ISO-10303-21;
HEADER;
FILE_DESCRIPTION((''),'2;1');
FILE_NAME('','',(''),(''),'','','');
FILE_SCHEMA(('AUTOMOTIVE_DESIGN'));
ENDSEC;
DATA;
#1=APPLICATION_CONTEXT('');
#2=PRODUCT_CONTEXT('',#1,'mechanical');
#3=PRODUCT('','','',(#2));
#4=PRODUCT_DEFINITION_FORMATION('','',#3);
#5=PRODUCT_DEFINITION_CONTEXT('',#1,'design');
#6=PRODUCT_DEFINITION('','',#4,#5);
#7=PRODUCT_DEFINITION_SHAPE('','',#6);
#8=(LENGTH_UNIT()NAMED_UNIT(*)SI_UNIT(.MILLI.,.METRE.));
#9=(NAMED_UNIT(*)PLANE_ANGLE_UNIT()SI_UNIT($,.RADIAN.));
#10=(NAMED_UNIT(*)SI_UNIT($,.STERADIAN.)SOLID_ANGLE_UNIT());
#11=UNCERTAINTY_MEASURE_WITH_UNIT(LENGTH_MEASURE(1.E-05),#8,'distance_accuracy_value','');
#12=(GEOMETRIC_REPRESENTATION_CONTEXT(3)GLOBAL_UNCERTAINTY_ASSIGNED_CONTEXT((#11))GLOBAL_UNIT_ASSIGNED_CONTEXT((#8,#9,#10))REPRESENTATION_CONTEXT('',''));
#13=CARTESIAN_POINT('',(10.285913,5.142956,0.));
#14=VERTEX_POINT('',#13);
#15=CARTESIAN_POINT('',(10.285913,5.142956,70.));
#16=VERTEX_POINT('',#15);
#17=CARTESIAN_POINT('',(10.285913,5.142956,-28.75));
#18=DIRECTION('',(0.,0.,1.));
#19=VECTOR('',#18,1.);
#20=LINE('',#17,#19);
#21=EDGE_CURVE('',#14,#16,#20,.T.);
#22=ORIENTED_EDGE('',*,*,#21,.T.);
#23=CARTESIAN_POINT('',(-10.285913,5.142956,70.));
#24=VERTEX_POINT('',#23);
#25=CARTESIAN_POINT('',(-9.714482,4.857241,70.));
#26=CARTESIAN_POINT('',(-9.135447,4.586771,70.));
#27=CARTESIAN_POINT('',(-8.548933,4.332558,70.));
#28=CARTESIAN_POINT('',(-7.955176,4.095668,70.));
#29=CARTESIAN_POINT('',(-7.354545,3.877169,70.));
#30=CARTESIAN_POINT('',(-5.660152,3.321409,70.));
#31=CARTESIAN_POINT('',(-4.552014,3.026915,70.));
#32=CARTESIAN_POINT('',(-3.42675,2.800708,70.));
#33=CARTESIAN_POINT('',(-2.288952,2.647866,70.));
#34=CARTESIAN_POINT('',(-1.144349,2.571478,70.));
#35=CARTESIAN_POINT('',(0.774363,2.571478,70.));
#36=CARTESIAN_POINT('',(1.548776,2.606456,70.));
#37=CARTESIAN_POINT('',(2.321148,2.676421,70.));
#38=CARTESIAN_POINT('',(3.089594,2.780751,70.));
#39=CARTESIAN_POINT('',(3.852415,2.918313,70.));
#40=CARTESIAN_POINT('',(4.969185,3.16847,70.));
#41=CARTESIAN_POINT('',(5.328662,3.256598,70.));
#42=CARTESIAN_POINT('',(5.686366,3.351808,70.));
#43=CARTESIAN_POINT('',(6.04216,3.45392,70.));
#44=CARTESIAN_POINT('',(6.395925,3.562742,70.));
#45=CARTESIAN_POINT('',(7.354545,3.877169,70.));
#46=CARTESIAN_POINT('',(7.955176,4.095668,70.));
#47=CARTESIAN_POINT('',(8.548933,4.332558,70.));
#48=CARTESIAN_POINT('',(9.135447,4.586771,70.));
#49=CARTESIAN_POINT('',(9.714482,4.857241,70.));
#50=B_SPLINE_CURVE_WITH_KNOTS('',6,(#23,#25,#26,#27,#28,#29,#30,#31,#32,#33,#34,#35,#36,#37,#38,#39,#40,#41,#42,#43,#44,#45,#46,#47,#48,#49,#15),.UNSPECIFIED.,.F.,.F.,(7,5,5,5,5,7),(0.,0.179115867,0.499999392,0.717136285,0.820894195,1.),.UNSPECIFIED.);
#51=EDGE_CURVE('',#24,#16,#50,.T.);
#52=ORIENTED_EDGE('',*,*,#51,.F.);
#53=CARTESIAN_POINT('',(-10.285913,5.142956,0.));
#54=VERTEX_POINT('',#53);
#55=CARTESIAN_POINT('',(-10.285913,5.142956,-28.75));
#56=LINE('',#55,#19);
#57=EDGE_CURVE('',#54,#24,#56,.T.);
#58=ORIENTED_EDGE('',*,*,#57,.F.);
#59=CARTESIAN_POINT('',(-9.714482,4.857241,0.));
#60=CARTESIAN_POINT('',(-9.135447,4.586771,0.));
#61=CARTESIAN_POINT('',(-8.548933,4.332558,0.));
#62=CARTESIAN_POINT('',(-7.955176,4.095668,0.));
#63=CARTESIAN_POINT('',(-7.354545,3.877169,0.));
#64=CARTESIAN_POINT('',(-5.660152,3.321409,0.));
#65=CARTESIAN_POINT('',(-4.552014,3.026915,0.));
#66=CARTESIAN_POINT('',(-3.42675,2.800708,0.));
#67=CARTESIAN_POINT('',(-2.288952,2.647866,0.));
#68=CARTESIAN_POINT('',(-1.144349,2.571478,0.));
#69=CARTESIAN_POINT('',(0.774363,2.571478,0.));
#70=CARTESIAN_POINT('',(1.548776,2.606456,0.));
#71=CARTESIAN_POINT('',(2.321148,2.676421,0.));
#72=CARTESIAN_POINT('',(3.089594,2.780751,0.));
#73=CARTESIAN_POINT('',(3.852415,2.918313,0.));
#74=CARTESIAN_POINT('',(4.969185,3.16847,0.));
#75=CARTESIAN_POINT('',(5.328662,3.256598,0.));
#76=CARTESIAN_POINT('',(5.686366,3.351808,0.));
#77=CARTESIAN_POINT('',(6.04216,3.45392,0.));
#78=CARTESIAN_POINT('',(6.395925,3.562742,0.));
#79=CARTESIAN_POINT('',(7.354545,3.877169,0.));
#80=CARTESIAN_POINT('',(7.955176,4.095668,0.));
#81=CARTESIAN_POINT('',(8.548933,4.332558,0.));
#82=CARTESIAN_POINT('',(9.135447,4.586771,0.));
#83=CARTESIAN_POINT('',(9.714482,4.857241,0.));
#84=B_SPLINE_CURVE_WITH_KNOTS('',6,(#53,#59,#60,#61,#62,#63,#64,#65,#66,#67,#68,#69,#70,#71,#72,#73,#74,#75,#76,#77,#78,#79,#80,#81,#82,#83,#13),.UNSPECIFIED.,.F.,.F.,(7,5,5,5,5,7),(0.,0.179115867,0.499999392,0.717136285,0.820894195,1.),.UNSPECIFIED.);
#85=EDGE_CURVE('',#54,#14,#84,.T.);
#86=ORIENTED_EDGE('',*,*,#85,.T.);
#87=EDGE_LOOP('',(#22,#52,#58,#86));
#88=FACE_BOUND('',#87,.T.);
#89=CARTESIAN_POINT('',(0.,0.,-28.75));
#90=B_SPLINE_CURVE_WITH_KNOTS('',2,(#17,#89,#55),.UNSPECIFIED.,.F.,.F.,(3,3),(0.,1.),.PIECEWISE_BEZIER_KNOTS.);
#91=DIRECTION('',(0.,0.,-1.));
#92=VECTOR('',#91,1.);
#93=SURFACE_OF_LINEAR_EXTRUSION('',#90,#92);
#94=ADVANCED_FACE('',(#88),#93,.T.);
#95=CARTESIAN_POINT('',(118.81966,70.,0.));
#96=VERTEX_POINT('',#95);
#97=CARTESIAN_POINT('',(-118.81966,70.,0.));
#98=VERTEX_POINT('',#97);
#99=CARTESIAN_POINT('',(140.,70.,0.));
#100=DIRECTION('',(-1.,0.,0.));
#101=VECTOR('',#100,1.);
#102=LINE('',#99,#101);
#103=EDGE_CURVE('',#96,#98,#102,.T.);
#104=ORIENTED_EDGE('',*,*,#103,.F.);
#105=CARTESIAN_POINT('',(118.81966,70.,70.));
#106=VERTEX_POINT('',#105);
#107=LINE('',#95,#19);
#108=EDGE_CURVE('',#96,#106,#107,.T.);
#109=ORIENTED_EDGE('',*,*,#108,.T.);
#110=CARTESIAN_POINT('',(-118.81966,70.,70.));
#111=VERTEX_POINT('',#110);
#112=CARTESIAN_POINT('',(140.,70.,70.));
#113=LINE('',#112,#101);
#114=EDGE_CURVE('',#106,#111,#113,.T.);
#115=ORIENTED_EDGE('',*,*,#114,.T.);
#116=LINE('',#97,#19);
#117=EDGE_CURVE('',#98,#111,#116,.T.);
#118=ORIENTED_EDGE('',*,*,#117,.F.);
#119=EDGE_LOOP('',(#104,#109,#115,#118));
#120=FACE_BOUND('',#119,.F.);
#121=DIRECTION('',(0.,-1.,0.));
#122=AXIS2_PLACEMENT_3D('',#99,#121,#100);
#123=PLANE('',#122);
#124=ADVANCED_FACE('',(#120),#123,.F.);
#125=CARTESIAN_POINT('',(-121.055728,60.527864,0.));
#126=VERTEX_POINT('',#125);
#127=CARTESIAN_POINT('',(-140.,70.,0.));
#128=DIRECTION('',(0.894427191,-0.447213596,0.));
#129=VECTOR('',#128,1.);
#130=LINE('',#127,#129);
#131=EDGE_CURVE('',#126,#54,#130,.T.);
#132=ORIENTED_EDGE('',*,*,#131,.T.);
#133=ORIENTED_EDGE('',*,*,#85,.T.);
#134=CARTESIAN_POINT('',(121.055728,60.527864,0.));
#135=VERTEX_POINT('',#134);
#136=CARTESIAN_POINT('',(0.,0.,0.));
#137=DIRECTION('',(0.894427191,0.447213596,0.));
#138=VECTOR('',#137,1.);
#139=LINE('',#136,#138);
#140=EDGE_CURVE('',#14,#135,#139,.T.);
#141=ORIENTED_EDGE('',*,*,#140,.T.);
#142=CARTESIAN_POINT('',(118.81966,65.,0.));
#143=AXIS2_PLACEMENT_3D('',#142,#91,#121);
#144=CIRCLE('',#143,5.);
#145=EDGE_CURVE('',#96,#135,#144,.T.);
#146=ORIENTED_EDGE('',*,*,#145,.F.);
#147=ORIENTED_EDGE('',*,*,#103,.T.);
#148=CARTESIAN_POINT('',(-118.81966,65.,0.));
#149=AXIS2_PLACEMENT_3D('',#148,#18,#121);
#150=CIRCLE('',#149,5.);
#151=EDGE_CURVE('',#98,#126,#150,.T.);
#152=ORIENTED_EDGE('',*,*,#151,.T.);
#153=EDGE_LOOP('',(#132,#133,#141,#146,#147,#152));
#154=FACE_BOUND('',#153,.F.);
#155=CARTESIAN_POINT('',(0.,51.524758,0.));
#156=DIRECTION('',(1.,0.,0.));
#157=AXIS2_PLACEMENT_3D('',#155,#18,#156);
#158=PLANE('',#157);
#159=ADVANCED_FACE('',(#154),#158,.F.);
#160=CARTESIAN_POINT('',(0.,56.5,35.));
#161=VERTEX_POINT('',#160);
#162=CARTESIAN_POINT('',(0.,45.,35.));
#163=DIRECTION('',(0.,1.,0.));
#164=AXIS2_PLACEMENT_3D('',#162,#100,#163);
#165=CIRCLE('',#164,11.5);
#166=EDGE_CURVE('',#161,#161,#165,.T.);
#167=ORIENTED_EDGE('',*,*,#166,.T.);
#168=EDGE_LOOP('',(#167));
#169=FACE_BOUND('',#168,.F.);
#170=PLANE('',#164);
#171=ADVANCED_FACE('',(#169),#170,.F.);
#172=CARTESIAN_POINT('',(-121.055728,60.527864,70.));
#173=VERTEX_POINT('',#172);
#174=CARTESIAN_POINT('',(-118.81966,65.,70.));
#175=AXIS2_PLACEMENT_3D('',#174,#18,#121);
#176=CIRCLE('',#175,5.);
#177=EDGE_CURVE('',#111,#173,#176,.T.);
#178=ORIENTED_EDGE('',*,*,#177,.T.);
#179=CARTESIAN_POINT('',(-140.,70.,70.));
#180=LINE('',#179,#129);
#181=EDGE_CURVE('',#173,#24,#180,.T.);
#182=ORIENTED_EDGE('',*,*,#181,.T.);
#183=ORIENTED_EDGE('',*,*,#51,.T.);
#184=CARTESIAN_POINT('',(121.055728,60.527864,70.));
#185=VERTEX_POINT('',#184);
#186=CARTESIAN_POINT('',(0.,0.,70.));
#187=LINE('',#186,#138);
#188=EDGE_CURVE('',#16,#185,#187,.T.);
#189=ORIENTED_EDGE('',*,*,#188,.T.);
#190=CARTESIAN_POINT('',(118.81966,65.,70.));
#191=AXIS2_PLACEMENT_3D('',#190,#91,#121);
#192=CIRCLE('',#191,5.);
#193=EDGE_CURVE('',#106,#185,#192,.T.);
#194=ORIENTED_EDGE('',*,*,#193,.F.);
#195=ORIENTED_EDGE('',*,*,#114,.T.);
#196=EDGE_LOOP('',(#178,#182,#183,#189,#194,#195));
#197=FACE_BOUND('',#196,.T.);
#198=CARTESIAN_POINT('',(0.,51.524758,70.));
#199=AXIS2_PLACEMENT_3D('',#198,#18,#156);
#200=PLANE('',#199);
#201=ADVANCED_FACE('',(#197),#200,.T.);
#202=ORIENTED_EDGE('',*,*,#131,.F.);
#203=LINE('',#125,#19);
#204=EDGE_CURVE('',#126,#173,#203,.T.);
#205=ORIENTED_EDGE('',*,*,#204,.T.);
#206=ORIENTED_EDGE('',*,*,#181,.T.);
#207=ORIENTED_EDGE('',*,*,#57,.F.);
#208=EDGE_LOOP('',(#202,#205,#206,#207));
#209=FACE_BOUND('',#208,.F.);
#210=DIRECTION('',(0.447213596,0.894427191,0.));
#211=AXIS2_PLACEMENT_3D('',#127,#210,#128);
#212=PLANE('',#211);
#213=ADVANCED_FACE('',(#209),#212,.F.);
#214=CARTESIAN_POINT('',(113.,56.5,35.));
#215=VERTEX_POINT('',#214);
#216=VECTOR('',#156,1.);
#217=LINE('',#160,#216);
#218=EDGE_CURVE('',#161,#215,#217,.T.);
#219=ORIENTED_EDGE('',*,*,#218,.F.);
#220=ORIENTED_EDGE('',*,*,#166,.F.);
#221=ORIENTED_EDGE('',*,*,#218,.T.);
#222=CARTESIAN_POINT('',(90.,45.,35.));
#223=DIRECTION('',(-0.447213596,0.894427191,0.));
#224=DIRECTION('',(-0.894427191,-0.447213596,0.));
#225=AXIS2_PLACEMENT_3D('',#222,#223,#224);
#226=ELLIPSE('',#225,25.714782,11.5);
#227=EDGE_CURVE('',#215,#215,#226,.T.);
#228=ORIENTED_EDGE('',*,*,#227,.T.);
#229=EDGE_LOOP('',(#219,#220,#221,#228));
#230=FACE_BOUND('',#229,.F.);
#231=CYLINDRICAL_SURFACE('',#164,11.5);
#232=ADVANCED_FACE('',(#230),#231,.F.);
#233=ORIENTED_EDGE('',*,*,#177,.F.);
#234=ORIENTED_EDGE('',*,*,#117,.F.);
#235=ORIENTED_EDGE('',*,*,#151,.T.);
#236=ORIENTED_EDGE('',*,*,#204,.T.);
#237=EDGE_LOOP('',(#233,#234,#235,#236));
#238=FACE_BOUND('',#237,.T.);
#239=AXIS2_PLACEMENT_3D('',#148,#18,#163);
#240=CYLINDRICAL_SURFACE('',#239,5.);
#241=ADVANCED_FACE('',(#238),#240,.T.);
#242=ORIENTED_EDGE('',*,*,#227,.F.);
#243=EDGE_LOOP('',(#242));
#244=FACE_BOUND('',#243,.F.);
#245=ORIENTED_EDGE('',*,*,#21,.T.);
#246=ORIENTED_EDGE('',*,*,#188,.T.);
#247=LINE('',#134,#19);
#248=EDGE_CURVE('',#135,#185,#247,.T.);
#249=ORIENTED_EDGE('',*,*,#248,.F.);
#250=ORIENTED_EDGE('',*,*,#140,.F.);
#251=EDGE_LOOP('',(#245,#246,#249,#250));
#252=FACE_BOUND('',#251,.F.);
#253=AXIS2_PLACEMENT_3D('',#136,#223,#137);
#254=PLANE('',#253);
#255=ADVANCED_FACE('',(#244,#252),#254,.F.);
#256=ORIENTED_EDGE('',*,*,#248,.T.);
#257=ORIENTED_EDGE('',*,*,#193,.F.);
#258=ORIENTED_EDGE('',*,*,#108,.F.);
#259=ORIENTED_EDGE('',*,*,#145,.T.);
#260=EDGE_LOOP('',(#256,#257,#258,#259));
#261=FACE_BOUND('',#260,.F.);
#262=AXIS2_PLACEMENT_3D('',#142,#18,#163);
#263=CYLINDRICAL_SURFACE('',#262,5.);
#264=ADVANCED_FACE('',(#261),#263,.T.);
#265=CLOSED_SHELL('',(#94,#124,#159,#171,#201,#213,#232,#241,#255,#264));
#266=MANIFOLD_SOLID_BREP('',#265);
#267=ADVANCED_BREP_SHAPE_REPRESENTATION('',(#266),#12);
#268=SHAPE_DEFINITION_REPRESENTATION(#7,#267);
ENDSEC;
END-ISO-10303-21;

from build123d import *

# Parameters (mm, degrees)
F1_DEPTH    = 70
F2_R        = 5
F3_T1_DEPTH = 127.5
F5_D        = 23
F5_DEPTH    = 123.8206602125


# Not quite as in the source:
# - a fillet or chamfer that OpenCascade refuses, or shapes differently, is made with other operations: its cross-section is extruded or revolved along the edge and cut away or added


with BuildPart() as f1:
    # F0 (on Top) → F1 (new body)
    with BuildSketch(Plane.XY):
        Polygon((140, 70), (-140, 70), (0, 0), align=None)
    extrude(amount=F1_DEPTH)

    # F2
    f2_edges = [f1.edges().sort_by_distance(p)[0] for p in [
        (140, 70, 35),
        (-140, 70, 35),
    ]]
    fillet(f2_edges, radius=F2_R)

    # F3: fillet of radius 23 on 1 edges, made by hand

    # F3_s2 → F3_t1 (cut)
    with BuildSketch(Plane.XY.offset(-28.75)):
        with BuildLine():
            add(Edge.make_bspline(
                [(10.2859126965, 5.1429563482), (0, 0), (-10.2859126965, 5.1429563482)],
                knots=[0, 0, 0, 1, 1, 1], degree=2, weights=[1, 1, 1]))
            Line((-10.2859126965, 5.1429563482), (0, 0))
            Line((0, 0), (10.2859126965, 5.1429563482))
        make_face()
    extrude(amount=F3_T1_DEPTH, mode=Mode.SUBTRACT)

    # F5 (through all, one way)
    with BuildSketch(Plane(origin=(0, 0, 0), x_dir=(0, 1, 0), z_dir=(-1, 0, 0))):
        with Locations((45, -35)):
            Circle(F5_D / 2)
    extrude(amount=-F5_DEPTH, mode=Mode.SUBTRACT)


solid = f1.part
